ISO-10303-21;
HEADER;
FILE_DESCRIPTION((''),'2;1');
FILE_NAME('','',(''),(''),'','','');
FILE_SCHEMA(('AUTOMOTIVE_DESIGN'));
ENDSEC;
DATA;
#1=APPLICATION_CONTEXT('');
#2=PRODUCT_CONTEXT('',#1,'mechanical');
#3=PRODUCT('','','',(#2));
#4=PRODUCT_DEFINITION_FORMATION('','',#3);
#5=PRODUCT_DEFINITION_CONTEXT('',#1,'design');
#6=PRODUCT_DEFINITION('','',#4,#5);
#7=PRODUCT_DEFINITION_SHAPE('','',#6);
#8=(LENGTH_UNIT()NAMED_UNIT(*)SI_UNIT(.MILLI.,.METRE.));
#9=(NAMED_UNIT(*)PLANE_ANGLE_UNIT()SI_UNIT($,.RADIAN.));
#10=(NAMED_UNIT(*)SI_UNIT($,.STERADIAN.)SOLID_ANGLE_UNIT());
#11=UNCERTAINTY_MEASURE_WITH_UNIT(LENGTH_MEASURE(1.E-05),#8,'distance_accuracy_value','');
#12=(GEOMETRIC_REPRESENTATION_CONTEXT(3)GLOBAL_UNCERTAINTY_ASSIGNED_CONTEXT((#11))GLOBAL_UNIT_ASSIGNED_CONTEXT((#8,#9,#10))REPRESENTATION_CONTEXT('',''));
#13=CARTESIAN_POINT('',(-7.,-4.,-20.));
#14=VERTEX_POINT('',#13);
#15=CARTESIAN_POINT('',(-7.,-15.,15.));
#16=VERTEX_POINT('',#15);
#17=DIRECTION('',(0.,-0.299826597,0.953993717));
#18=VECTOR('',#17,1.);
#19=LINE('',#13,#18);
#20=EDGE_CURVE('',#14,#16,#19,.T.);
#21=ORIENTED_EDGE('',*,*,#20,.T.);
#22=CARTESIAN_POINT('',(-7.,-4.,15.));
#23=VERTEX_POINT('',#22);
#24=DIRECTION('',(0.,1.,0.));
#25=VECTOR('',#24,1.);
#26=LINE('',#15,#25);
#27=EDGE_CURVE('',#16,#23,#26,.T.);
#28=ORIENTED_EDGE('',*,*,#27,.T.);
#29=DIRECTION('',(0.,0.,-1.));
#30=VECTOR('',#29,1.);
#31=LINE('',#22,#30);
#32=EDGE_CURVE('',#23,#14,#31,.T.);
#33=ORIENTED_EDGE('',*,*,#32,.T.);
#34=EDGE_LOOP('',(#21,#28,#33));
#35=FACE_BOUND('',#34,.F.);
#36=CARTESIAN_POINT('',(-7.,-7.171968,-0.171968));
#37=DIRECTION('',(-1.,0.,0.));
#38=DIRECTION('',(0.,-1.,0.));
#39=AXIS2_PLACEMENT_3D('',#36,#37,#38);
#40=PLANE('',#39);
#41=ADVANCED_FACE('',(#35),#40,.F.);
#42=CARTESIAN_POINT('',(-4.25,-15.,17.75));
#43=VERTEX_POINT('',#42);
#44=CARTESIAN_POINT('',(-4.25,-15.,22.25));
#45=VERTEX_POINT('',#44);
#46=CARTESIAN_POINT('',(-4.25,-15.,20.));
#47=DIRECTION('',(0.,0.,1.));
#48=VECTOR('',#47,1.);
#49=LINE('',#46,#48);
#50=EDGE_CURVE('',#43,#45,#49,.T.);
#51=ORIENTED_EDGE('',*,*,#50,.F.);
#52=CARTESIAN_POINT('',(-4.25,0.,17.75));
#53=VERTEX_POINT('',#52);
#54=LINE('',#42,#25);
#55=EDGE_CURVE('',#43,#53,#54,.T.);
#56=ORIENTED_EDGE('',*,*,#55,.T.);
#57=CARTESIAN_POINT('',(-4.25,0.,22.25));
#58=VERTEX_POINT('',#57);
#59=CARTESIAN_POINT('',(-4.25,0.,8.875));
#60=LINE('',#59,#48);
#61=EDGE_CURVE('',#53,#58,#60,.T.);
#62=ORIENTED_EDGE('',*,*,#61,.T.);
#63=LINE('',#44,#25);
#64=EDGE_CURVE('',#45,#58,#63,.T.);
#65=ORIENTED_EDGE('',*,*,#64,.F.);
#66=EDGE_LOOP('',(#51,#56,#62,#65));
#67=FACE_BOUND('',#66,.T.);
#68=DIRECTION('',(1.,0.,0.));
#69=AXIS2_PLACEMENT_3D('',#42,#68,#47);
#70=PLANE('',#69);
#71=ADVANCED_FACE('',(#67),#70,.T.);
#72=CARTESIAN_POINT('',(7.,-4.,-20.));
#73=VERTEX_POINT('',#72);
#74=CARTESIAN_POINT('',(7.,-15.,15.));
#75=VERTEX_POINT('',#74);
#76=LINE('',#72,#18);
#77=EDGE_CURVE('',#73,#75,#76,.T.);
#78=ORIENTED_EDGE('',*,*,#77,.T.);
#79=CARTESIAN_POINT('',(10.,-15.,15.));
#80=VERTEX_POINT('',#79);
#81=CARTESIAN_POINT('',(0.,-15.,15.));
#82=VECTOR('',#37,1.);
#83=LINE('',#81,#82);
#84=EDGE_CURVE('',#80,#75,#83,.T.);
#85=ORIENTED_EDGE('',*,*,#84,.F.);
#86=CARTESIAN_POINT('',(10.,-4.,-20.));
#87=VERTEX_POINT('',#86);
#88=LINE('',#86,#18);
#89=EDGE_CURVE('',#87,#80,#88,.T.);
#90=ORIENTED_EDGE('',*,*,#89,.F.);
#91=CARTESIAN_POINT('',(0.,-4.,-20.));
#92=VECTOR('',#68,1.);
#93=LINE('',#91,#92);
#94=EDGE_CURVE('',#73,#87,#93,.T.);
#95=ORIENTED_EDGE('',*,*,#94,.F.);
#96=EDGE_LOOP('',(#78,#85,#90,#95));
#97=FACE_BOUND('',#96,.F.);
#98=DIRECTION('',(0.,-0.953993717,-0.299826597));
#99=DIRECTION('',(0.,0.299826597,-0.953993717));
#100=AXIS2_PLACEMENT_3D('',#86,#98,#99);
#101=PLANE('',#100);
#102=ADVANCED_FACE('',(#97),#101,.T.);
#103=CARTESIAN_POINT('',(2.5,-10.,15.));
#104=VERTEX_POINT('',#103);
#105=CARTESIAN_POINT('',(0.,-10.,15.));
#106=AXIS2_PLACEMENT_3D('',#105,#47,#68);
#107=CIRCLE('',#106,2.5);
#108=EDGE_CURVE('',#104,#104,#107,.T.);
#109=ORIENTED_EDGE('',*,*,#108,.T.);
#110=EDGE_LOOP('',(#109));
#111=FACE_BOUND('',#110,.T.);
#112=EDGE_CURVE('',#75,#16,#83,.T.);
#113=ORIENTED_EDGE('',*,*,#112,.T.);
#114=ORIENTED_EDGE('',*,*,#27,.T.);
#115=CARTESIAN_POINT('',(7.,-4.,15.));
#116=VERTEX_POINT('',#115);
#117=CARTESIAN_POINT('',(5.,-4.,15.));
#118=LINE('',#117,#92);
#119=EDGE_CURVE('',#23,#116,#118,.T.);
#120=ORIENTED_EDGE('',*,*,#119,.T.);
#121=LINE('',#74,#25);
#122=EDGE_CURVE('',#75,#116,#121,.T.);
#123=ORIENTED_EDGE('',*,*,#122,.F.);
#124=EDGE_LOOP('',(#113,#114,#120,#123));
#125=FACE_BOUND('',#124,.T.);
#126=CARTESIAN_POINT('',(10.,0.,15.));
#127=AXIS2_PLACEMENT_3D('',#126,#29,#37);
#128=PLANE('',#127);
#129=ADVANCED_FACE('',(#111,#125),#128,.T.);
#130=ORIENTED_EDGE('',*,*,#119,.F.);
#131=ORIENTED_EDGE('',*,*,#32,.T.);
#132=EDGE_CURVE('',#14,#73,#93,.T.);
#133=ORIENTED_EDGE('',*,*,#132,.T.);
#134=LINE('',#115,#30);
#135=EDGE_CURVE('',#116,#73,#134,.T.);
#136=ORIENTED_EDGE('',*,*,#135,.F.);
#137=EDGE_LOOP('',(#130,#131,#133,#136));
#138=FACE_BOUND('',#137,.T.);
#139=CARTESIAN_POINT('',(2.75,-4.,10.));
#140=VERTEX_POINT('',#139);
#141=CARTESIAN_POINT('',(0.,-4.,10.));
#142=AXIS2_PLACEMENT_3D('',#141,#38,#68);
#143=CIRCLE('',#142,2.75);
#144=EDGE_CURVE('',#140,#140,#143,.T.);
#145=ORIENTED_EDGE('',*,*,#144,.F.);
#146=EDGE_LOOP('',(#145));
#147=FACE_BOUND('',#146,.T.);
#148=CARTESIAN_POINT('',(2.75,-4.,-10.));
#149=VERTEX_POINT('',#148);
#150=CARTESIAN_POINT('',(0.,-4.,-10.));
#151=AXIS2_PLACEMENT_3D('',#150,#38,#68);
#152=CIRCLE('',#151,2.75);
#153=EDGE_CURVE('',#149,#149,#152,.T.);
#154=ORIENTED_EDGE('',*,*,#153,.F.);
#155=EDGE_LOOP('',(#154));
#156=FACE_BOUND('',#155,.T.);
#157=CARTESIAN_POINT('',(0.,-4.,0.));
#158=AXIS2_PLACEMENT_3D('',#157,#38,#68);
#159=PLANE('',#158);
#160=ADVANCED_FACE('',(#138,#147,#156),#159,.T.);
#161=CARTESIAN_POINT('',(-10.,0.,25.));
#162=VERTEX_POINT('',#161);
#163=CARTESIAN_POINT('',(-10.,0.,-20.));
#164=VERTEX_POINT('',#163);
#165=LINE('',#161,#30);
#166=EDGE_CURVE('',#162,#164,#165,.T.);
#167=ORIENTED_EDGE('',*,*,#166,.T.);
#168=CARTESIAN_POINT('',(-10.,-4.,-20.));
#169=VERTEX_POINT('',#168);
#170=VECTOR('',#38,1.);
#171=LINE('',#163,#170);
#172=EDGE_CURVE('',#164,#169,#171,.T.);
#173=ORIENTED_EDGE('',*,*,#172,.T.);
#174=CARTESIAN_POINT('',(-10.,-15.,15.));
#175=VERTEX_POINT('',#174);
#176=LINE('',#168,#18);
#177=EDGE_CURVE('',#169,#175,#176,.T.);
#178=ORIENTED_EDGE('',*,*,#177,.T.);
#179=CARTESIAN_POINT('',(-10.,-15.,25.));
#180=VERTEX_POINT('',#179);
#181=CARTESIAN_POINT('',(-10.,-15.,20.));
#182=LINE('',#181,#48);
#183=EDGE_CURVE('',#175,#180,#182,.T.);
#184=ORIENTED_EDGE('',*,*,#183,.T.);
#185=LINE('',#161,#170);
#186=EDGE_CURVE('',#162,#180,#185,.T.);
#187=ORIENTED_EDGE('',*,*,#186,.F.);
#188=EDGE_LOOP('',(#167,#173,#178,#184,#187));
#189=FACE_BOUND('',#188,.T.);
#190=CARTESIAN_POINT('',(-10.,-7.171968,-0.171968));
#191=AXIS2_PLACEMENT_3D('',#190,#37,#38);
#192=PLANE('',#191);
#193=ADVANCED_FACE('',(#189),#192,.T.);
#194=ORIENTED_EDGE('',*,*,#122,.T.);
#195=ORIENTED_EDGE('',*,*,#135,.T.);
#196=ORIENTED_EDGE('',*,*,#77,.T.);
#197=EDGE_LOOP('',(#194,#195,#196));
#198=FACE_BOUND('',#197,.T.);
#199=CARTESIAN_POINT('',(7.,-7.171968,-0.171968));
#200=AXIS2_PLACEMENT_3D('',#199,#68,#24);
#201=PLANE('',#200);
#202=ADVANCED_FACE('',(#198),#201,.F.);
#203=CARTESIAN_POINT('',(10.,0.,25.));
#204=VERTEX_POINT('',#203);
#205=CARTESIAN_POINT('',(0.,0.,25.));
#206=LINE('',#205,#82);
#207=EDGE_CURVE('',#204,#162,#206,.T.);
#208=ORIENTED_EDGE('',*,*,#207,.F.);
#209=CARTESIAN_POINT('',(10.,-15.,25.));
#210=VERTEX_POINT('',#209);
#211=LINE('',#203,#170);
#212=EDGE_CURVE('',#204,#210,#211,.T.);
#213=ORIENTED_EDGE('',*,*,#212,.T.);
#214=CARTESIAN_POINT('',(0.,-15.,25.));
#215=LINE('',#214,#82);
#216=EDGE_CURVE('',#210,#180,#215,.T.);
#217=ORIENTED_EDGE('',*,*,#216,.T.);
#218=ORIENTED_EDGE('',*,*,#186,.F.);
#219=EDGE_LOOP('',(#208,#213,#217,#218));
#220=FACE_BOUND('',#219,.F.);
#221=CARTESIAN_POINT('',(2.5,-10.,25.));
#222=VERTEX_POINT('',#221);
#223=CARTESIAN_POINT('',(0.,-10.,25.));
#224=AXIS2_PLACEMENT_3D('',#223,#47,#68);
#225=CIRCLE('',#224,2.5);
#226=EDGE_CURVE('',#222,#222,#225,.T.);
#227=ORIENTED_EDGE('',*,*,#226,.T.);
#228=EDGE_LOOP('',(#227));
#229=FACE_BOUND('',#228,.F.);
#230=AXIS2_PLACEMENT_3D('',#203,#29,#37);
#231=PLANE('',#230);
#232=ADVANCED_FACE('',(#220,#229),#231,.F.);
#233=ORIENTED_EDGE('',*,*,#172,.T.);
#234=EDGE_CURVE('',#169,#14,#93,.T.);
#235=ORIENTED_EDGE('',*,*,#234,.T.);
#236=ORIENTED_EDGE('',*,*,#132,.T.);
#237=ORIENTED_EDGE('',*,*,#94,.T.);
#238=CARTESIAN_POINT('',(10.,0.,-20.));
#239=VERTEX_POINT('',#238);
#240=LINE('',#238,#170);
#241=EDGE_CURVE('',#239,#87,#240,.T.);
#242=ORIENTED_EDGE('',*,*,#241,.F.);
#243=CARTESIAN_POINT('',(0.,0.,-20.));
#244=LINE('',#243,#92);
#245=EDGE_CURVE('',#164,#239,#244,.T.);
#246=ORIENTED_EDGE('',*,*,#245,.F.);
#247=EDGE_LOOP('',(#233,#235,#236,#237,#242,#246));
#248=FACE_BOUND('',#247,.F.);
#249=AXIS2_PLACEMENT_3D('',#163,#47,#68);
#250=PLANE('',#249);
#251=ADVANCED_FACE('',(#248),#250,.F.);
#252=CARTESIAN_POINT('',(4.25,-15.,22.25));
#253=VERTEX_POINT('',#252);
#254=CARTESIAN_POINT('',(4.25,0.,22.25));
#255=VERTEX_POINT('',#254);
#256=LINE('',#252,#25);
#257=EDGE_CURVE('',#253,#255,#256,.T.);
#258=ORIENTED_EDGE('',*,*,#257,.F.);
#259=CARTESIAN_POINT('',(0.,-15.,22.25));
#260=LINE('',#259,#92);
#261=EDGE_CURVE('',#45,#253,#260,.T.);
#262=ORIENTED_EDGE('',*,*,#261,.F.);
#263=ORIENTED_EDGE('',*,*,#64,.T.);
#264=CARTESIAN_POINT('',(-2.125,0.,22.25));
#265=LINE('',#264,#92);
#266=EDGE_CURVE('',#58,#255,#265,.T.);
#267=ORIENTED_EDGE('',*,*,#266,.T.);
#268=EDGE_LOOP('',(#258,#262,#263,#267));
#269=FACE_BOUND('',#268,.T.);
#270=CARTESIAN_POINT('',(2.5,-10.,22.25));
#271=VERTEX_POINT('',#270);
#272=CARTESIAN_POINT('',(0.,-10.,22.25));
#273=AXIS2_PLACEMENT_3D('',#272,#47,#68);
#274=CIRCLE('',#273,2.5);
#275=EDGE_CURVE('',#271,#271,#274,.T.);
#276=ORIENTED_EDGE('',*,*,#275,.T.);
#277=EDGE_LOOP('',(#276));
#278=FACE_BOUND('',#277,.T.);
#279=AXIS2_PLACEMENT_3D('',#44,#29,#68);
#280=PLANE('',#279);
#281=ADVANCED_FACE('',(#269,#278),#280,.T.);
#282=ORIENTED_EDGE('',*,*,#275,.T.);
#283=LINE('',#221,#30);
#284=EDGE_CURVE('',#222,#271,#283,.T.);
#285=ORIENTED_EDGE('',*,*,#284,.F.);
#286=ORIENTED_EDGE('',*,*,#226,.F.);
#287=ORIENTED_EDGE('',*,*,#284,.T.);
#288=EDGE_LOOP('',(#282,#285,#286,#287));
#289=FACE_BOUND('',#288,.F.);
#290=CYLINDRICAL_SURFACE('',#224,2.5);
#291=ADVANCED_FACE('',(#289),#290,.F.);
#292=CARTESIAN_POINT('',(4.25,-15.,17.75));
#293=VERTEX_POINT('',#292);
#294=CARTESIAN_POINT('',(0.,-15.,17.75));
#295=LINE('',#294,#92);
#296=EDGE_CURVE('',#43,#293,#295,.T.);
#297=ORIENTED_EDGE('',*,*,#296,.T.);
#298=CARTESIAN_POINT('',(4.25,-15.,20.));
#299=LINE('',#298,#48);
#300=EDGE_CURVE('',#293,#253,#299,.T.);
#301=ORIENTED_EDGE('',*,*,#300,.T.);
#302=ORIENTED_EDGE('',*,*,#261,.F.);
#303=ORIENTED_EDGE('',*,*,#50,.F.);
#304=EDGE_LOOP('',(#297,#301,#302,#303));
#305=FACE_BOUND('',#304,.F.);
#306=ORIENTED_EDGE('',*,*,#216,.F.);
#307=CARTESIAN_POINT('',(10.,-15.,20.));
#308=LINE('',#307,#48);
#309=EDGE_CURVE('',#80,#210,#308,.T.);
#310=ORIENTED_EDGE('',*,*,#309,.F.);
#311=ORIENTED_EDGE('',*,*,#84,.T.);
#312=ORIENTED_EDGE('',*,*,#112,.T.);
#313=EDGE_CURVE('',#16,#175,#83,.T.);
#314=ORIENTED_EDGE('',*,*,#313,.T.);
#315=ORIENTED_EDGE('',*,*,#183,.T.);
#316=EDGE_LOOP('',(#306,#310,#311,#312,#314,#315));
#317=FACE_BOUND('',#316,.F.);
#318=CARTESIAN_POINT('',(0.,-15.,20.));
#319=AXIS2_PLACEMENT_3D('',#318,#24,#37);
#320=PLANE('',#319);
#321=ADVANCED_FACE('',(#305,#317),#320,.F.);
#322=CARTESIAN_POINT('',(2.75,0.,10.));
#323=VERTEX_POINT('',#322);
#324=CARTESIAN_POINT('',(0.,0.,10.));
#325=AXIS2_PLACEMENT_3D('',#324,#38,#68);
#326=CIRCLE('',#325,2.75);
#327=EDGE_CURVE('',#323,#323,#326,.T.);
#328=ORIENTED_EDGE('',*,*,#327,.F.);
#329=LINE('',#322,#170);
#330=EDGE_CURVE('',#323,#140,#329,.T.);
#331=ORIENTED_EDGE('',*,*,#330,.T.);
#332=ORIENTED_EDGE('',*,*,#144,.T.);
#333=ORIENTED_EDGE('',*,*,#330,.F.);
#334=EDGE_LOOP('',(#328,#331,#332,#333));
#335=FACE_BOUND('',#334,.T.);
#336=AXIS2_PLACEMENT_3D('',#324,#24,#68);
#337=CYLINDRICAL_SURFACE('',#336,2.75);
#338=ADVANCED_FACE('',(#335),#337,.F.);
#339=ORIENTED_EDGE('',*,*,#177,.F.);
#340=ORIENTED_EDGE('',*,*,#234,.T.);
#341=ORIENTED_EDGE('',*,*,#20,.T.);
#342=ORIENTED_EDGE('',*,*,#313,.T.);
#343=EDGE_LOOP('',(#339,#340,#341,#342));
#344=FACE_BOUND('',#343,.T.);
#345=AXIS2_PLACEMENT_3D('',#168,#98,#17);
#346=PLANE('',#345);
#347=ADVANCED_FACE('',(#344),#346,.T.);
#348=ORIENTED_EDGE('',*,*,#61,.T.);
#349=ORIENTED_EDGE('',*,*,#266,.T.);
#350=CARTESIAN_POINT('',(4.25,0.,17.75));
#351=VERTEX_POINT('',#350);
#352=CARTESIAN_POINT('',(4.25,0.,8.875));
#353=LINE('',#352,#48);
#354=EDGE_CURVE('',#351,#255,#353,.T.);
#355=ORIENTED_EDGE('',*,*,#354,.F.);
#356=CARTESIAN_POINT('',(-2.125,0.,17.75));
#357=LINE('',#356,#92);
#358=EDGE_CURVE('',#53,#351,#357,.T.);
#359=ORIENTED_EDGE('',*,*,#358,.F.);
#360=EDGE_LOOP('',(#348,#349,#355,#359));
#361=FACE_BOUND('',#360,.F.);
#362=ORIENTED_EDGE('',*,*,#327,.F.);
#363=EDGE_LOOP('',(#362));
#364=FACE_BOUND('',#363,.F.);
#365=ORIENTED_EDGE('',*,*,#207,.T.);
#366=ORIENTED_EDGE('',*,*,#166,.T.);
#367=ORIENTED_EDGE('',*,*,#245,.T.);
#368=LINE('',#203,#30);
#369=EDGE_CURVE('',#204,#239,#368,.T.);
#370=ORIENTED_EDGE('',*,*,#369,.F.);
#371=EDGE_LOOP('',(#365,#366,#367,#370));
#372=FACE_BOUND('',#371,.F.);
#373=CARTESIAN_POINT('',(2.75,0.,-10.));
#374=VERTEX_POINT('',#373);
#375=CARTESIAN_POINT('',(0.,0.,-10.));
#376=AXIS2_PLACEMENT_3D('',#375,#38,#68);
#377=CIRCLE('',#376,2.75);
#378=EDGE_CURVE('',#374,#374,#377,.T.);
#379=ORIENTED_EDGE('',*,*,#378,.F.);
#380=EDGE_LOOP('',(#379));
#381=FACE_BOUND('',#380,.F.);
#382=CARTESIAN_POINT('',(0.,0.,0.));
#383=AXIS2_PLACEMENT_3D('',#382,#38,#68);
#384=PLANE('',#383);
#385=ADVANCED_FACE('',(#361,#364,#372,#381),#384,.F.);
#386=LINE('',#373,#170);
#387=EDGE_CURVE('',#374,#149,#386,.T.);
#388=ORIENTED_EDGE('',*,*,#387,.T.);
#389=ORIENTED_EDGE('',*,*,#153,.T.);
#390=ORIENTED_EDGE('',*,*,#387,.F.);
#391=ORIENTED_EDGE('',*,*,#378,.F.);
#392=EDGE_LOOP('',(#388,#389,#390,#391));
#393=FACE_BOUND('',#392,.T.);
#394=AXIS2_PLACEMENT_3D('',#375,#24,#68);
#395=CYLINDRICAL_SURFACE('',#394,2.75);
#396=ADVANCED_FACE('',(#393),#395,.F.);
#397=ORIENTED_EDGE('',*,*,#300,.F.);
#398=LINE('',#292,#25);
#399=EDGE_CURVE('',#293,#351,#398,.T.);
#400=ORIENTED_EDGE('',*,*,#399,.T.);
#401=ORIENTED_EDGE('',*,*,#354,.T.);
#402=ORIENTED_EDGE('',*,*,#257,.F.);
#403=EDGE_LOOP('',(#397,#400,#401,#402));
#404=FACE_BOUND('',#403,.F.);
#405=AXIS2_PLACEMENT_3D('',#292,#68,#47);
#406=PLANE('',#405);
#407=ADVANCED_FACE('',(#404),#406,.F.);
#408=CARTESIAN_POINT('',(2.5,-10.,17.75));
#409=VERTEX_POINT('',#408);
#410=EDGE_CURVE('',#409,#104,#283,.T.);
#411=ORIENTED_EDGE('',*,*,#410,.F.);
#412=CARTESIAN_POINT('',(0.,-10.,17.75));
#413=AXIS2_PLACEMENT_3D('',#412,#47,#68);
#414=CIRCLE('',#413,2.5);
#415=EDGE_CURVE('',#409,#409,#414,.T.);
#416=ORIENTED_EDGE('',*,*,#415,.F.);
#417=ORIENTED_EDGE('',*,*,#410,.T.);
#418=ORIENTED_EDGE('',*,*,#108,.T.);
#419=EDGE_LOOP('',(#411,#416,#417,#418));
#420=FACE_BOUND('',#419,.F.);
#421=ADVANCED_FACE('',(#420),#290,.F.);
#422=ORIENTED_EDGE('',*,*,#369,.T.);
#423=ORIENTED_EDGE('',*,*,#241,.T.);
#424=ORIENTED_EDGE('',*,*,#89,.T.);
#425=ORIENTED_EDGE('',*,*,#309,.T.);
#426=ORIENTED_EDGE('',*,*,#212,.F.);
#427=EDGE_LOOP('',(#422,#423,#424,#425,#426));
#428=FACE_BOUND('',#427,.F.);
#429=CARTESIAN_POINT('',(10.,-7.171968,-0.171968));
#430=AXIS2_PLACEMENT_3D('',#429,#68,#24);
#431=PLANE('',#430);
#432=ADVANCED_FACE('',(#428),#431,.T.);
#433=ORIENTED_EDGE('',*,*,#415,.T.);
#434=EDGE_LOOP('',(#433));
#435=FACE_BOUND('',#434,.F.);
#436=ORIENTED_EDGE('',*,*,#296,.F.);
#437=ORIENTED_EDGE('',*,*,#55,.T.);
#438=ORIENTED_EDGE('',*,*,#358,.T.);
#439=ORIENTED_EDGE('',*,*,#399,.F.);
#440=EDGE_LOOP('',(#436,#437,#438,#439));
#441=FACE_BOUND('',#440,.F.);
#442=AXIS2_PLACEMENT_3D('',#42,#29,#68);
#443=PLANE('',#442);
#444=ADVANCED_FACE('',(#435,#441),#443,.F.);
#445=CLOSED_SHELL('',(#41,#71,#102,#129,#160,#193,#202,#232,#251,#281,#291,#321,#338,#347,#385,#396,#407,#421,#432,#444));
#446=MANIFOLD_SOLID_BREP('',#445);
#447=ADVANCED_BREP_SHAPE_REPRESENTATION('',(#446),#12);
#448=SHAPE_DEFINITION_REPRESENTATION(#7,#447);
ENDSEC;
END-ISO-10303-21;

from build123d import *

# Parameters (mm, degrees)
F0_W     = 20
F0_H     = 40
F0_R     = 2.75
F1_DEPTH = 4
F2_W     = 20
F2_H     = 10
F3_DEPTH = 15
F4_W     = 8.5
F4_H     = 4.5
F5_DEPTH = 30
F6_R     = 2.5
F7_DEPTH = 20
F9_DEPTH = 3


# Not quite as in the source:
# - a pattern or mirror of a feature is missing from the dataset's text; its kind, count and spacing are read off the source's solid


with BuildPart() as f1:
    # F0 (on Front) → F1 (new body)
    with BuildSketch(Plane.XZ):
        Rectangle(F0_W, F0_H)
        with Locations((0, -10)):
            Circle(F0_R, mode=Mode.SUBTRACT)
        with Locations((0, 10)):
            Circle(F0_R, mode=Mode.SUBTRACT)
    extrude(amount=F1_DEPTH)

    # F2 (on face) → F3 (join)
    with BuildSketch(Plane(origin=(0, 0, 0), x_dir=(-1, 0, 0), z_dir=(0, 1, 0))):
        with Locations((0, 20)):
            Rectangle(F2_W, F2_H)
    extrude(amount=-F3_DEPTH)

    # F4 (on face) → F5 (cut)
    with BuildSketch(Plane.XZ.offset(15)):
        with Locations((0, 20)):
            Rectangle(F4_W, F4_H)
    extrude(amount=-F5_DEPTH, mode=Mode.SUBTRACT)

    # F6 (on face) → F7 (cut)
    with BuildSketch(Plane.XY.offset(25)):
        with Locations((0, -10)):
            Circle(F6_R)
    extrude(amount=-F7_DEPTH, mode=Mode.SUBTRACT)

    # F8 (on face) → F9 (join)
    with BuildSketch(Plane(origin=(-10, 0, 0), x_dir=(0, -1, 0), z_dir=(-1, 0, 0))):
        Polygon((4, -20), (15, 15), (4, 15), align=None)
    f9 = extrude(amount=-F9_DEPTH)

    # F9_copies: F9 across plane
    add(f9.mirror(Plane(origin=(0, 0, 0), x_dir=(0, 0, 1), z_dir=(1, 0, 0))))


solid = f1.part
